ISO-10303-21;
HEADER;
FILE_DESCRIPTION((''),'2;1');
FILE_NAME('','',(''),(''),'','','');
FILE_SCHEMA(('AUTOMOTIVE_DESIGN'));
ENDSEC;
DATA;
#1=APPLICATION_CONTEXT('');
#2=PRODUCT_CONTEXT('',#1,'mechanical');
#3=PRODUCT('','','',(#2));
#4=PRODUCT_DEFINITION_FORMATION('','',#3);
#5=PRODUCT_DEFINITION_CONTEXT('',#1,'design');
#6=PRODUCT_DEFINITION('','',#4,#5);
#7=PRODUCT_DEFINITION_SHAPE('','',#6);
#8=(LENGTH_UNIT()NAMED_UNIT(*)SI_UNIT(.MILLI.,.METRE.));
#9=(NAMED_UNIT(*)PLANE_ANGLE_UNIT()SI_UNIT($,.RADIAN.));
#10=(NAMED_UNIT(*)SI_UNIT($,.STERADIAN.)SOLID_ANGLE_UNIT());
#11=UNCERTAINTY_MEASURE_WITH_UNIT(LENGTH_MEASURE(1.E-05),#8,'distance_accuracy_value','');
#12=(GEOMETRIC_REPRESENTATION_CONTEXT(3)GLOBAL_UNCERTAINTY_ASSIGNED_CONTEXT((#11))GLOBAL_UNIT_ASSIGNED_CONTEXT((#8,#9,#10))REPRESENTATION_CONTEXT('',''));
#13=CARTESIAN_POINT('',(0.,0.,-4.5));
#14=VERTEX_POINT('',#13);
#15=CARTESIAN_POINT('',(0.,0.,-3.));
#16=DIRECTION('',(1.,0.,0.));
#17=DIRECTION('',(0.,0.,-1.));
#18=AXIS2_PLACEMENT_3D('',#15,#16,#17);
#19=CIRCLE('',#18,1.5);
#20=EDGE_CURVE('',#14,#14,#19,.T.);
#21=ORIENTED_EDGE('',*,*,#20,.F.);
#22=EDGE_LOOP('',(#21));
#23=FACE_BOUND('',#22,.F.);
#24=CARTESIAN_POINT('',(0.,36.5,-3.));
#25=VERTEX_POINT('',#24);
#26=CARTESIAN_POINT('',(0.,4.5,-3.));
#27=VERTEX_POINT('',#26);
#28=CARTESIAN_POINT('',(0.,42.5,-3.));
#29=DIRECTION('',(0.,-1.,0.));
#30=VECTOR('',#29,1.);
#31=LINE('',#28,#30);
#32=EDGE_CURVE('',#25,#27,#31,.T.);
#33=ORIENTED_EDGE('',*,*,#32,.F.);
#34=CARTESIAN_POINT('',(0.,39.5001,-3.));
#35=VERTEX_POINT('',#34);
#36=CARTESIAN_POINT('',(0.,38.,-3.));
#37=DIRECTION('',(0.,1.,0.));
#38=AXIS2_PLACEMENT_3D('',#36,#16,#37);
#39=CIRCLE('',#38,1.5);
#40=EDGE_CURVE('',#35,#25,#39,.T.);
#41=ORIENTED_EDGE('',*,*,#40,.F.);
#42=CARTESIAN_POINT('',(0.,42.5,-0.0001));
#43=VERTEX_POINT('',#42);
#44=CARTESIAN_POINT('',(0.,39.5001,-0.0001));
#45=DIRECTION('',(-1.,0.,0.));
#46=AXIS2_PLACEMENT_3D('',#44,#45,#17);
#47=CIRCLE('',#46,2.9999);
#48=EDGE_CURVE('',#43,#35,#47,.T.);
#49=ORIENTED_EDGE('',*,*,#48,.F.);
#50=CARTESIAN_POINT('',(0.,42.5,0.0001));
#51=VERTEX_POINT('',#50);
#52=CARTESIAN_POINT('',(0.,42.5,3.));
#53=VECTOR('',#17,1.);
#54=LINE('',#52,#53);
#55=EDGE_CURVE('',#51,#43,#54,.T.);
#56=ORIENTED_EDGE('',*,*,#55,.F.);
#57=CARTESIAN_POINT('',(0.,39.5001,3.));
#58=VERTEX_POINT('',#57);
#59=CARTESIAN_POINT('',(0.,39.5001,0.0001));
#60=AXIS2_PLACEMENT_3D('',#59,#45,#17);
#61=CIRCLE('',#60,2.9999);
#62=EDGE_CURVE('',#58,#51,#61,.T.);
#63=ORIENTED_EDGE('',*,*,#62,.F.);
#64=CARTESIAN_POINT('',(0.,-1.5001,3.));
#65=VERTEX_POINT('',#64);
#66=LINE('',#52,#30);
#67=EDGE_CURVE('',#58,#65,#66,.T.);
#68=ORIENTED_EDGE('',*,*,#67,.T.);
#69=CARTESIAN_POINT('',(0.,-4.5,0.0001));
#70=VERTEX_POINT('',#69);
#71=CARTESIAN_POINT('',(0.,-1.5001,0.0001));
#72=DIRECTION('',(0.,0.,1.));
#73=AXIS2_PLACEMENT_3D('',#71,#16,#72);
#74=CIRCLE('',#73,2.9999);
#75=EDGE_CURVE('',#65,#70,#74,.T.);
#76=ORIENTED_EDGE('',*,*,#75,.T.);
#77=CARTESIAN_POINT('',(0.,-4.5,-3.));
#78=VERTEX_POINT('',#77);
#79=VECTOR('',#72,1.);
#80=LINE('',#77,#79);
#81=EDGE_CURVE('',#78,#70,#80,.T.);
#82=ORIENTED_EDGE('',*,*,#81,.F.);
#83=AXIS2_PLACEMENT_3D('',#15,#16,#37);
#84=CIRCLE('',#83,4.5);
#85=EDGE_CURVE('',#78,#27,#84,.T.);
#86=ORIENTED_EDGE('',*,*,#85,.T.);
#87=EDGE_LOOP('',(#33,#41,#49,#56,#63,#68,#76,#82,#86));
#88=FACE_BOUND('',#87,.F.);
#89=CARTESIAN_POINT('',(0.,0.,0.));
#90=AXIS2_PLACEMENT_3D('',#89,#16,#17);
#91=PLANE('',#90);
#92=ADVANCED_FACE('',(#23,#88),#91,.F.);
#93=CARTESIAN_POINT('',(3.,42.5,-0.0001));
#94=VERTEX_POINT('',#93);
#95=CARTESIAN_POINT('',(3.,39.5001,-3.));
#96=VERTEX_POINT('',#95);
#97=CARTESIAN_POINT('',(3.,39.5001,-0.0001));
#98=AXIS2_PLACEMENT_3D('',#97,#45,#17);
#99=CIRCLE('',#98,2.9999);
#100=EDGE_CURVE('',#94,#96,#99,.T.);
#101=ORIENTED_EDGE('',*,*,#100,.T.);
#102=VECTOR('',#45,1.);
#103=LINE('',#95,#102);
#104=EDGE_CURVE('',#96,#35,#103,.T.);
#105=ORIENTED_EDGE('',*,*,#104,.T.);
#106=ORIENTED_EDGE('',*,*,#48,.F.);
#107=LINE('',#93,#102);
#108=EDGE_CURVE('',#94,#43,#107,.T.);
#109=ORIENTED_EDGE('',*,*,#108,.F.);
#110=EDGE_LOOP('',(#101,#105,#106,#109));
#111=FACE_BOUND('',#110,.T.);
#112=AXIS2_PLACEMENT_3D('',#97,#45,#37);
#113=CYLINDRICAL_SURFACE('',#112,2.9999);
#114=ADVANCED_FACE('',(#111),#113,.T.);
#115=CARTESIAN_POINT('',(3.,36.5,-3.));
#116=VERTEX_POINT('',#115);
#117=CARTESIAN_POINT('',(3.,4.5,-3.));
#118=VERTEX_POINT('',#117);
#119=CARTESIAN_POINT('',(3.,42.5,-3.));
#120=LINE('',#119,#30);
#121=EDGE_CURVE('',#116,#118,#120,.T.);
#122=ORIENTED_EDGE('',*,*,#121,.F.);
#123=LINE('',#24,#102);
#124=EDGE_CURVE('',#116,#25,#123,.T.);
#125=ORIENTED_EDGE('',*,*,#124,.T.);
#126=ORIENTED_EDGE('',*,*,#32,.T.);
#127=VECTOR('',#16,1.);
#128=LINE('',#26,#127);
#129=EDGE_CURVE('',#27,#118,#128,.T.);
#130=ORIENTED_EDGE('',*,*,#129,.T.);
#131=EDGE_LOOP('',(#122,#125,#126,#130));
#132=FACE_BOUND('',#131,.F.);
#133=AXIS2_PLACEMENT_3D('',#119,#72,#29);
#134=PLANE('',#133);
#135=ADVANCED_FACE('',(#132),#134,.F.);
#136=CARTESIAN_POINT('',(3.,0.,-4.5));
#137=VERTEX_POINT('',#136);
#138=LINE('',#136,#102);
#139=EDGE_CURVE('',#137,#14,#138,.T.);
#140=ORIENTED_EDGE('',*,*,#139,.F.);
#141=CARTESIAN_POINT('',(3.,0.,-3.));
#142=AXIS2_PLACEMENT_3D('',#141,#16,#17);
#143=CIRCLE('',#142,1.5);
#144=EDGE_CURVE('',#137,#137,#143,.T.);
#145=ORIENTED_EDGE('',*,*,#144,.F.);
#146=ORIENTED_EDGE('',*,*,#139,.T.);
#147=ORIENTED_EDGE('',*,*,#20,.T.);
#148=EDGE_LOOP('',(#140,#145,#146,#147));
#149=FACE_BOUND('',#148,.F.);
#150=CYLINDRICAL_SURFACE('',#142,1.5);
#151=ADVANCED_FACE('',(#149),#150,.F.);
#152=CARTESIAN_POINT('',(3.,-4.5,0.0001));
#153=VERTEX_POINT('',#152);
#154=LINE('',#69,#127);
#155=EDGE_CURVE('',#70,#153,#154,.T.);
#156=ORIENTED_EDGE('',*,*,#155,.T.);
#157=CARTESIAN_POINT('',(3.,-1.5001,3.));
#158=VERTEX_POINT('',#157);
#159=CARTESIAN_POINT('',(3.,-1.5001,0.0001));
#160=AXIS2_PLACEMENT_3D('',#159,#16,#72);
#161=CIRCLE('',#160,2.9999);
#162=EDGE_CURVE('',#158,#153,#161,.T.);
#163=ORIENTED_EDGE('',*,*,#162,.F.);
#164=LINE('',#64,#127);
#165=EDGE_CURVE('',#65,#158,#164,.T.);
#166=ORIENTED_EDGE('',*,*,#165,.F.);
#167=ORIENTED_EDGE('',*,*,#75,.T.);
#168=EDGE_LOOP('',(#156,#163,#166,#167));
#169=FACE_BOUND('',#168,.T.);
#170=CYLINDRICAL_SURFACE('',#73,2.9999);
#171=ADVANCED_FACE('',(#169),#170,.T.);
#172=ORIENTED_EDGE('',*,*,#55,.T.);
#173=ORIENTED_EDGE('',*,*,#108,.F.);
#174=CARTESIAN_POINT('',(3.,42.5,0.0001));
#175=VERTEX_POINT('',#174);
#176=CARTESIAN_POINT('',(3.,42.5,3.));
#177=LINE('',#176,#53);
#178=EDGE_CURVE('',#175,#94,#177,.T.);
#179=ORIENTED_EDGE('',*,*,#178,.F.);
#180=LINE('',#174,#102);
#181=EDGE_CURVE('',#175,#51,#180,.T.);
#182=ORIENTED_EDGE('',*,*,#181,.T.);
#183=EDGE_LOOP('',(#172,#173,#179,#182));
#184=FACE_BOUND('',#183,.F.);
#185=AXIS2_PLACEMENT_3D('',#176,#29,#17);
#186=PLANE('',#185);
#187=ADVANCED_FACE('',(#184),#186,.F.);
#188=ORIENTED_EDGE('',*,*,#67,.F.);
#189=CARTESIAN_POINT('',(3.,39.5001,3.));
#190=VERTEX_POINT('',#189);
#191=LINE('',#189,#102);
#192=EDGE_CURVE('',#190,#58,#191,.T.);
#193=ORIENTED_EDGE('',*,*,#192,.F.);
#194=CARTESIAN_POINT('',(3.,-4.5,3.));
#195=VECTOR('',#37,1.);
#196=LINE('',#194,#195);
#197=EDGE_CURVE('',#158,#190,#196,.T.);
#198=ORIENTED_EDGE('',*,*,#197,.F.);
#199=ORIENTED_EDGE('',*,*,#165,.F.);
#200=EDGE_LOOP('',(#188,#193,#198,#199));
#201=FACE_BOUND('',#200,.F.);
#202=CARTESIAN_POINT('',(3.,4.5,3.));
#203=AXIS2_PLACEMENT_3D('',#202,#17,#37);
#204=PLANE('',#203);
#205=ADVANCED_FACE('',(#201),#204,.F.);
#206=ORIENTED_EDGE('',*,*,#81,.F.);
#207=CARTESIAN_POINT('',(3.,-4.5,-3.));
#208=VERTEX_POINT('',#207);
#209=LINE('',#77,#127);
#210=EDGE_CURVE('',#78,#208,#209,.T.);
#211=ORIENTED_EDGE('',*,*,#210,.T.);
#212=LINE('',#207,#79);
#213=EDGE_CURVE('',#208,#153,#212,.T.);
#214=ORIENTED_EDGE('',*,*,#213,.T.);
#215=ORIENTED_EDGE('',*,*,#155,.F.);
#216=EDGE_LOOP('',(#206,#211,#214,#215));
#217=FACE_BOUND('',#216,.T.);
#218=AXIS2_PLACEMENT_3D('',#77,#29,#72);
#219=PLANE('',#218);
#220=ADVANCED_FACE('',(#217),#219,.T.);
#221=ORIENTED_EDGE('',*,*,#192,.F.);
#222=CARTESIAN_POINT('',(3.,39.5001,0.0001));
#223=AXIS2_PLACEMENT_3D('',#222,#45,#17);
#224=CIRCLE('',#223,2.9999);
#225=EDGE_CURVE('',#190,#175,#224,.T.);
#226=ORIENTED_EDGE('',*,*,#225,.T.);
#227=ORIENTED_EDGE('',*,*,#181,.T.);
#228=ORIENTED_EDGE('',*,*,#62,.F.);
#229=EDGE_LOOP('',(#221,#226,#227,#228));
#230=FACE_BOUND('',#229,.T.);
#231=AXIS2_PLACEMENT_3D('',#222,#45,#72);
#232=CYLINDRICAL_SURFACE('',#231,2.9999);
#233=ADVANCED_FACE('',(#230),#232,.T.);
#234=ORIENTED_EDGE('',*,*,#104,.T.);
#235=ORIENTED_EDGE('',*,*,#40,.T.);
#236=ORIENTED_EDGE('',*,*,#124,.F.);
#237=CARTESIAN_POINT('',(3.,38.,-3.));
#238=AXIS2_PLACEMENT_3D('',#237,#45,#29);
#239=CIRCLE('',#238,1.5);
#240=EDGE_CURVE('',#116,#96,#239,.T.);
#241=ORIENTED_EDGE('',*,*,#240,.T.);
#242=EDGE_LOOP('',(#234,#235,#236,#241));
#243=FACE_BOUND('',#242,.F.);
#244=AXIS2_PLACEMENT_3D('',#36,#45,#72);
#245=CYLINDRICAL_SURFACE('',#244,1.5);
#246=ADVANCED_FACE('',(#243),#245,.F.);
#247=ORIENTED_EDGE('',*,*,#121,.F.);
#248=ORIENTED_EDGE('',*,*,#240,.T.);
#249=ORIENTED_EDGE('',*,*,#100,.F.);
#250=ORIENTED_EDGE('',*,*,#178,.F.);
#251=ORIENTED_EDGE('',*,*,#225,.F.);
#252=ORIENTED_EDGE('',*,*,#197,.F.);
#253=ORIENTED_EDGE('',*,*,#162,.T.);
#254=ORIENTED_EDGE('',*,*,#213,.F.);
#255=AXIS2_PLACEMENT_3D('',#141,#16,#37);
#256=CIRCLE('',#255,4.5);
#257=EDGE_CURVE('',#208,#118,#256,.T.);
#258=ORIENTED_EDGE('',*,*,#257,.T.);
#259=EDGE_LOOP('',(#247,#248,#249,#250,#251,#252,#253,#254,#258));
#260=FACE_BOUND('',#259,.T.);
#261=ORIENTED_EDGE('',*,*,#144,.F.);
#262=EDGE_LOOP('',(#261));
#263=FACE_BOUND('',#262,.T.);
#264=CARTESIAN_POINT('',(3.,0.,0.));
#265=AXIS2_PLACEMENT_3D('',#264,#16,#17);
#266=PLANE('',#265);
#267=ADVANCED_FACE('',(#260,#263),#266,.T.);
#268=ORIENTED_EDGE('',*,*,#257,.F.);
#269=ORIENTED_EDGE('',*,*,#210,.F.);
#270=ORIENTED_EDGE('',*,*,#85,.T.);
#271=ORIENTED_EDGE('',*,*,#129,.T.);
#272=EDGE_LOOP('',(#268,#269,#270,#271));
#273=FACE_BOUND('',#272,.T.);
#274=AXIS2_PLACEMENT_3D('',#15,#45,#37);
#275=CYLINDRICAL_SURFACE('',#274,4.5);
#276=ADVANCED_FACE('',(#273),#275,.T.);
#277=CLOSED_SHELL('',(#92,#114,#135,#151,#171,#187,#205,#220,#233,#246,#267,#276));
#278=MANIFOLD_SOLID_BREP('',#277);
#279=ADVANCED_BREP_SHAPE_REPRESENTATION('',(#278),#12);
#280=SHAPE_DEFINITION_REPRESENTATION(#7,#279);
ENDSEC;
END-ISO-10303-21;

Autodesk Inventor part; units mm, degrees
ref_plane "YZ Plane" through (0, 0, 0) normal (1, 0, 0) x (0, 1, 0)
ref_plane "XZ Plane" through (0, 0, 0) normal (0, 1, 0) x (-1, 0, 0)
ref_plane "XY Plane" through (0, 0, 0) normal (0, 0, 1) x (1, 0, 0)
sketch "Sketch1" plane through (0, 0, 0) normal (1, 0, 0) x (0, 1, 0)
  line L0 (-4.5, 3) -> (4.5, 3)
  line L1 (4.5, 3) -> (4.5, -3)
  line L2 (4.5, -3) -> (-4.5, -3)
  line L3 (-4.5, -3) -> (-4.5, 3)
  line L4 (-4.5, 3) -> (4.5, -3) construction
  line L5 (4.5, 3) -> (-4.5, -3) construction
  circle A0 centre (0, -3) radius 4.5
  point P0 (0, 0)
  dimension "d0" = 9
  dimension "d1" = 6
  dimension "d2" = 9
extrude "Extrusion1" add sketch "Sketch1" along normal blind 3
sketch "Sketch2" plane through (3, 0, 0) normal (1, 0, 0) x (0, 0, -1)
  line L0 (3, 4.5) -> (-3, 4.5)
  line L1 (-3, 4.5) -> (-3, 42.5)
  line L2 (-3, 42.5) -> (3, 42.5)
  line L3 (3, 42.5) -> (3, 4.5)
  point P0 (0, 0)
  dimension "d5" = 6
  dimension "d6" = 38
extrude "Extrusion2" add sketch "Sketch2" against normal blind 3
sketch "Sketch3" plane through (3, 0, 0) normal (1, 0, 0) x (0, 0, -1)
  arc A0 (3, -4.5) -> (3, 4.5) centre (3, 0) ccw projected
  circle A1 centre (3, 0) radius 1.5
  point P0 (0, 0)
  dimension "d9" = 3
extrude "Extrusion3" cut sketch "Sketch3" against normal blind 3
fillet "Fillet1" radius 3 3 edges at (1.5, -4.5, 3) (1.5, 42.5, 3) (1.5, 42.5, -3)
sketch "Sketch4" plane through (0, 0, 0) normal (-1, 0, 0) x (0, 0, 1)
  circle A0 centre (-3, 38) radius 1.5
  circle A1 centre (-3, 0) radius 1.5 projected
  point P0 (0, 0)
  dimension "d13" = 3
  dimension "d14" = 38
extrude "Extrusion4" cut sketch "Sketch4" against normal blind 3 contours A0
properties part number "Battery holder"
